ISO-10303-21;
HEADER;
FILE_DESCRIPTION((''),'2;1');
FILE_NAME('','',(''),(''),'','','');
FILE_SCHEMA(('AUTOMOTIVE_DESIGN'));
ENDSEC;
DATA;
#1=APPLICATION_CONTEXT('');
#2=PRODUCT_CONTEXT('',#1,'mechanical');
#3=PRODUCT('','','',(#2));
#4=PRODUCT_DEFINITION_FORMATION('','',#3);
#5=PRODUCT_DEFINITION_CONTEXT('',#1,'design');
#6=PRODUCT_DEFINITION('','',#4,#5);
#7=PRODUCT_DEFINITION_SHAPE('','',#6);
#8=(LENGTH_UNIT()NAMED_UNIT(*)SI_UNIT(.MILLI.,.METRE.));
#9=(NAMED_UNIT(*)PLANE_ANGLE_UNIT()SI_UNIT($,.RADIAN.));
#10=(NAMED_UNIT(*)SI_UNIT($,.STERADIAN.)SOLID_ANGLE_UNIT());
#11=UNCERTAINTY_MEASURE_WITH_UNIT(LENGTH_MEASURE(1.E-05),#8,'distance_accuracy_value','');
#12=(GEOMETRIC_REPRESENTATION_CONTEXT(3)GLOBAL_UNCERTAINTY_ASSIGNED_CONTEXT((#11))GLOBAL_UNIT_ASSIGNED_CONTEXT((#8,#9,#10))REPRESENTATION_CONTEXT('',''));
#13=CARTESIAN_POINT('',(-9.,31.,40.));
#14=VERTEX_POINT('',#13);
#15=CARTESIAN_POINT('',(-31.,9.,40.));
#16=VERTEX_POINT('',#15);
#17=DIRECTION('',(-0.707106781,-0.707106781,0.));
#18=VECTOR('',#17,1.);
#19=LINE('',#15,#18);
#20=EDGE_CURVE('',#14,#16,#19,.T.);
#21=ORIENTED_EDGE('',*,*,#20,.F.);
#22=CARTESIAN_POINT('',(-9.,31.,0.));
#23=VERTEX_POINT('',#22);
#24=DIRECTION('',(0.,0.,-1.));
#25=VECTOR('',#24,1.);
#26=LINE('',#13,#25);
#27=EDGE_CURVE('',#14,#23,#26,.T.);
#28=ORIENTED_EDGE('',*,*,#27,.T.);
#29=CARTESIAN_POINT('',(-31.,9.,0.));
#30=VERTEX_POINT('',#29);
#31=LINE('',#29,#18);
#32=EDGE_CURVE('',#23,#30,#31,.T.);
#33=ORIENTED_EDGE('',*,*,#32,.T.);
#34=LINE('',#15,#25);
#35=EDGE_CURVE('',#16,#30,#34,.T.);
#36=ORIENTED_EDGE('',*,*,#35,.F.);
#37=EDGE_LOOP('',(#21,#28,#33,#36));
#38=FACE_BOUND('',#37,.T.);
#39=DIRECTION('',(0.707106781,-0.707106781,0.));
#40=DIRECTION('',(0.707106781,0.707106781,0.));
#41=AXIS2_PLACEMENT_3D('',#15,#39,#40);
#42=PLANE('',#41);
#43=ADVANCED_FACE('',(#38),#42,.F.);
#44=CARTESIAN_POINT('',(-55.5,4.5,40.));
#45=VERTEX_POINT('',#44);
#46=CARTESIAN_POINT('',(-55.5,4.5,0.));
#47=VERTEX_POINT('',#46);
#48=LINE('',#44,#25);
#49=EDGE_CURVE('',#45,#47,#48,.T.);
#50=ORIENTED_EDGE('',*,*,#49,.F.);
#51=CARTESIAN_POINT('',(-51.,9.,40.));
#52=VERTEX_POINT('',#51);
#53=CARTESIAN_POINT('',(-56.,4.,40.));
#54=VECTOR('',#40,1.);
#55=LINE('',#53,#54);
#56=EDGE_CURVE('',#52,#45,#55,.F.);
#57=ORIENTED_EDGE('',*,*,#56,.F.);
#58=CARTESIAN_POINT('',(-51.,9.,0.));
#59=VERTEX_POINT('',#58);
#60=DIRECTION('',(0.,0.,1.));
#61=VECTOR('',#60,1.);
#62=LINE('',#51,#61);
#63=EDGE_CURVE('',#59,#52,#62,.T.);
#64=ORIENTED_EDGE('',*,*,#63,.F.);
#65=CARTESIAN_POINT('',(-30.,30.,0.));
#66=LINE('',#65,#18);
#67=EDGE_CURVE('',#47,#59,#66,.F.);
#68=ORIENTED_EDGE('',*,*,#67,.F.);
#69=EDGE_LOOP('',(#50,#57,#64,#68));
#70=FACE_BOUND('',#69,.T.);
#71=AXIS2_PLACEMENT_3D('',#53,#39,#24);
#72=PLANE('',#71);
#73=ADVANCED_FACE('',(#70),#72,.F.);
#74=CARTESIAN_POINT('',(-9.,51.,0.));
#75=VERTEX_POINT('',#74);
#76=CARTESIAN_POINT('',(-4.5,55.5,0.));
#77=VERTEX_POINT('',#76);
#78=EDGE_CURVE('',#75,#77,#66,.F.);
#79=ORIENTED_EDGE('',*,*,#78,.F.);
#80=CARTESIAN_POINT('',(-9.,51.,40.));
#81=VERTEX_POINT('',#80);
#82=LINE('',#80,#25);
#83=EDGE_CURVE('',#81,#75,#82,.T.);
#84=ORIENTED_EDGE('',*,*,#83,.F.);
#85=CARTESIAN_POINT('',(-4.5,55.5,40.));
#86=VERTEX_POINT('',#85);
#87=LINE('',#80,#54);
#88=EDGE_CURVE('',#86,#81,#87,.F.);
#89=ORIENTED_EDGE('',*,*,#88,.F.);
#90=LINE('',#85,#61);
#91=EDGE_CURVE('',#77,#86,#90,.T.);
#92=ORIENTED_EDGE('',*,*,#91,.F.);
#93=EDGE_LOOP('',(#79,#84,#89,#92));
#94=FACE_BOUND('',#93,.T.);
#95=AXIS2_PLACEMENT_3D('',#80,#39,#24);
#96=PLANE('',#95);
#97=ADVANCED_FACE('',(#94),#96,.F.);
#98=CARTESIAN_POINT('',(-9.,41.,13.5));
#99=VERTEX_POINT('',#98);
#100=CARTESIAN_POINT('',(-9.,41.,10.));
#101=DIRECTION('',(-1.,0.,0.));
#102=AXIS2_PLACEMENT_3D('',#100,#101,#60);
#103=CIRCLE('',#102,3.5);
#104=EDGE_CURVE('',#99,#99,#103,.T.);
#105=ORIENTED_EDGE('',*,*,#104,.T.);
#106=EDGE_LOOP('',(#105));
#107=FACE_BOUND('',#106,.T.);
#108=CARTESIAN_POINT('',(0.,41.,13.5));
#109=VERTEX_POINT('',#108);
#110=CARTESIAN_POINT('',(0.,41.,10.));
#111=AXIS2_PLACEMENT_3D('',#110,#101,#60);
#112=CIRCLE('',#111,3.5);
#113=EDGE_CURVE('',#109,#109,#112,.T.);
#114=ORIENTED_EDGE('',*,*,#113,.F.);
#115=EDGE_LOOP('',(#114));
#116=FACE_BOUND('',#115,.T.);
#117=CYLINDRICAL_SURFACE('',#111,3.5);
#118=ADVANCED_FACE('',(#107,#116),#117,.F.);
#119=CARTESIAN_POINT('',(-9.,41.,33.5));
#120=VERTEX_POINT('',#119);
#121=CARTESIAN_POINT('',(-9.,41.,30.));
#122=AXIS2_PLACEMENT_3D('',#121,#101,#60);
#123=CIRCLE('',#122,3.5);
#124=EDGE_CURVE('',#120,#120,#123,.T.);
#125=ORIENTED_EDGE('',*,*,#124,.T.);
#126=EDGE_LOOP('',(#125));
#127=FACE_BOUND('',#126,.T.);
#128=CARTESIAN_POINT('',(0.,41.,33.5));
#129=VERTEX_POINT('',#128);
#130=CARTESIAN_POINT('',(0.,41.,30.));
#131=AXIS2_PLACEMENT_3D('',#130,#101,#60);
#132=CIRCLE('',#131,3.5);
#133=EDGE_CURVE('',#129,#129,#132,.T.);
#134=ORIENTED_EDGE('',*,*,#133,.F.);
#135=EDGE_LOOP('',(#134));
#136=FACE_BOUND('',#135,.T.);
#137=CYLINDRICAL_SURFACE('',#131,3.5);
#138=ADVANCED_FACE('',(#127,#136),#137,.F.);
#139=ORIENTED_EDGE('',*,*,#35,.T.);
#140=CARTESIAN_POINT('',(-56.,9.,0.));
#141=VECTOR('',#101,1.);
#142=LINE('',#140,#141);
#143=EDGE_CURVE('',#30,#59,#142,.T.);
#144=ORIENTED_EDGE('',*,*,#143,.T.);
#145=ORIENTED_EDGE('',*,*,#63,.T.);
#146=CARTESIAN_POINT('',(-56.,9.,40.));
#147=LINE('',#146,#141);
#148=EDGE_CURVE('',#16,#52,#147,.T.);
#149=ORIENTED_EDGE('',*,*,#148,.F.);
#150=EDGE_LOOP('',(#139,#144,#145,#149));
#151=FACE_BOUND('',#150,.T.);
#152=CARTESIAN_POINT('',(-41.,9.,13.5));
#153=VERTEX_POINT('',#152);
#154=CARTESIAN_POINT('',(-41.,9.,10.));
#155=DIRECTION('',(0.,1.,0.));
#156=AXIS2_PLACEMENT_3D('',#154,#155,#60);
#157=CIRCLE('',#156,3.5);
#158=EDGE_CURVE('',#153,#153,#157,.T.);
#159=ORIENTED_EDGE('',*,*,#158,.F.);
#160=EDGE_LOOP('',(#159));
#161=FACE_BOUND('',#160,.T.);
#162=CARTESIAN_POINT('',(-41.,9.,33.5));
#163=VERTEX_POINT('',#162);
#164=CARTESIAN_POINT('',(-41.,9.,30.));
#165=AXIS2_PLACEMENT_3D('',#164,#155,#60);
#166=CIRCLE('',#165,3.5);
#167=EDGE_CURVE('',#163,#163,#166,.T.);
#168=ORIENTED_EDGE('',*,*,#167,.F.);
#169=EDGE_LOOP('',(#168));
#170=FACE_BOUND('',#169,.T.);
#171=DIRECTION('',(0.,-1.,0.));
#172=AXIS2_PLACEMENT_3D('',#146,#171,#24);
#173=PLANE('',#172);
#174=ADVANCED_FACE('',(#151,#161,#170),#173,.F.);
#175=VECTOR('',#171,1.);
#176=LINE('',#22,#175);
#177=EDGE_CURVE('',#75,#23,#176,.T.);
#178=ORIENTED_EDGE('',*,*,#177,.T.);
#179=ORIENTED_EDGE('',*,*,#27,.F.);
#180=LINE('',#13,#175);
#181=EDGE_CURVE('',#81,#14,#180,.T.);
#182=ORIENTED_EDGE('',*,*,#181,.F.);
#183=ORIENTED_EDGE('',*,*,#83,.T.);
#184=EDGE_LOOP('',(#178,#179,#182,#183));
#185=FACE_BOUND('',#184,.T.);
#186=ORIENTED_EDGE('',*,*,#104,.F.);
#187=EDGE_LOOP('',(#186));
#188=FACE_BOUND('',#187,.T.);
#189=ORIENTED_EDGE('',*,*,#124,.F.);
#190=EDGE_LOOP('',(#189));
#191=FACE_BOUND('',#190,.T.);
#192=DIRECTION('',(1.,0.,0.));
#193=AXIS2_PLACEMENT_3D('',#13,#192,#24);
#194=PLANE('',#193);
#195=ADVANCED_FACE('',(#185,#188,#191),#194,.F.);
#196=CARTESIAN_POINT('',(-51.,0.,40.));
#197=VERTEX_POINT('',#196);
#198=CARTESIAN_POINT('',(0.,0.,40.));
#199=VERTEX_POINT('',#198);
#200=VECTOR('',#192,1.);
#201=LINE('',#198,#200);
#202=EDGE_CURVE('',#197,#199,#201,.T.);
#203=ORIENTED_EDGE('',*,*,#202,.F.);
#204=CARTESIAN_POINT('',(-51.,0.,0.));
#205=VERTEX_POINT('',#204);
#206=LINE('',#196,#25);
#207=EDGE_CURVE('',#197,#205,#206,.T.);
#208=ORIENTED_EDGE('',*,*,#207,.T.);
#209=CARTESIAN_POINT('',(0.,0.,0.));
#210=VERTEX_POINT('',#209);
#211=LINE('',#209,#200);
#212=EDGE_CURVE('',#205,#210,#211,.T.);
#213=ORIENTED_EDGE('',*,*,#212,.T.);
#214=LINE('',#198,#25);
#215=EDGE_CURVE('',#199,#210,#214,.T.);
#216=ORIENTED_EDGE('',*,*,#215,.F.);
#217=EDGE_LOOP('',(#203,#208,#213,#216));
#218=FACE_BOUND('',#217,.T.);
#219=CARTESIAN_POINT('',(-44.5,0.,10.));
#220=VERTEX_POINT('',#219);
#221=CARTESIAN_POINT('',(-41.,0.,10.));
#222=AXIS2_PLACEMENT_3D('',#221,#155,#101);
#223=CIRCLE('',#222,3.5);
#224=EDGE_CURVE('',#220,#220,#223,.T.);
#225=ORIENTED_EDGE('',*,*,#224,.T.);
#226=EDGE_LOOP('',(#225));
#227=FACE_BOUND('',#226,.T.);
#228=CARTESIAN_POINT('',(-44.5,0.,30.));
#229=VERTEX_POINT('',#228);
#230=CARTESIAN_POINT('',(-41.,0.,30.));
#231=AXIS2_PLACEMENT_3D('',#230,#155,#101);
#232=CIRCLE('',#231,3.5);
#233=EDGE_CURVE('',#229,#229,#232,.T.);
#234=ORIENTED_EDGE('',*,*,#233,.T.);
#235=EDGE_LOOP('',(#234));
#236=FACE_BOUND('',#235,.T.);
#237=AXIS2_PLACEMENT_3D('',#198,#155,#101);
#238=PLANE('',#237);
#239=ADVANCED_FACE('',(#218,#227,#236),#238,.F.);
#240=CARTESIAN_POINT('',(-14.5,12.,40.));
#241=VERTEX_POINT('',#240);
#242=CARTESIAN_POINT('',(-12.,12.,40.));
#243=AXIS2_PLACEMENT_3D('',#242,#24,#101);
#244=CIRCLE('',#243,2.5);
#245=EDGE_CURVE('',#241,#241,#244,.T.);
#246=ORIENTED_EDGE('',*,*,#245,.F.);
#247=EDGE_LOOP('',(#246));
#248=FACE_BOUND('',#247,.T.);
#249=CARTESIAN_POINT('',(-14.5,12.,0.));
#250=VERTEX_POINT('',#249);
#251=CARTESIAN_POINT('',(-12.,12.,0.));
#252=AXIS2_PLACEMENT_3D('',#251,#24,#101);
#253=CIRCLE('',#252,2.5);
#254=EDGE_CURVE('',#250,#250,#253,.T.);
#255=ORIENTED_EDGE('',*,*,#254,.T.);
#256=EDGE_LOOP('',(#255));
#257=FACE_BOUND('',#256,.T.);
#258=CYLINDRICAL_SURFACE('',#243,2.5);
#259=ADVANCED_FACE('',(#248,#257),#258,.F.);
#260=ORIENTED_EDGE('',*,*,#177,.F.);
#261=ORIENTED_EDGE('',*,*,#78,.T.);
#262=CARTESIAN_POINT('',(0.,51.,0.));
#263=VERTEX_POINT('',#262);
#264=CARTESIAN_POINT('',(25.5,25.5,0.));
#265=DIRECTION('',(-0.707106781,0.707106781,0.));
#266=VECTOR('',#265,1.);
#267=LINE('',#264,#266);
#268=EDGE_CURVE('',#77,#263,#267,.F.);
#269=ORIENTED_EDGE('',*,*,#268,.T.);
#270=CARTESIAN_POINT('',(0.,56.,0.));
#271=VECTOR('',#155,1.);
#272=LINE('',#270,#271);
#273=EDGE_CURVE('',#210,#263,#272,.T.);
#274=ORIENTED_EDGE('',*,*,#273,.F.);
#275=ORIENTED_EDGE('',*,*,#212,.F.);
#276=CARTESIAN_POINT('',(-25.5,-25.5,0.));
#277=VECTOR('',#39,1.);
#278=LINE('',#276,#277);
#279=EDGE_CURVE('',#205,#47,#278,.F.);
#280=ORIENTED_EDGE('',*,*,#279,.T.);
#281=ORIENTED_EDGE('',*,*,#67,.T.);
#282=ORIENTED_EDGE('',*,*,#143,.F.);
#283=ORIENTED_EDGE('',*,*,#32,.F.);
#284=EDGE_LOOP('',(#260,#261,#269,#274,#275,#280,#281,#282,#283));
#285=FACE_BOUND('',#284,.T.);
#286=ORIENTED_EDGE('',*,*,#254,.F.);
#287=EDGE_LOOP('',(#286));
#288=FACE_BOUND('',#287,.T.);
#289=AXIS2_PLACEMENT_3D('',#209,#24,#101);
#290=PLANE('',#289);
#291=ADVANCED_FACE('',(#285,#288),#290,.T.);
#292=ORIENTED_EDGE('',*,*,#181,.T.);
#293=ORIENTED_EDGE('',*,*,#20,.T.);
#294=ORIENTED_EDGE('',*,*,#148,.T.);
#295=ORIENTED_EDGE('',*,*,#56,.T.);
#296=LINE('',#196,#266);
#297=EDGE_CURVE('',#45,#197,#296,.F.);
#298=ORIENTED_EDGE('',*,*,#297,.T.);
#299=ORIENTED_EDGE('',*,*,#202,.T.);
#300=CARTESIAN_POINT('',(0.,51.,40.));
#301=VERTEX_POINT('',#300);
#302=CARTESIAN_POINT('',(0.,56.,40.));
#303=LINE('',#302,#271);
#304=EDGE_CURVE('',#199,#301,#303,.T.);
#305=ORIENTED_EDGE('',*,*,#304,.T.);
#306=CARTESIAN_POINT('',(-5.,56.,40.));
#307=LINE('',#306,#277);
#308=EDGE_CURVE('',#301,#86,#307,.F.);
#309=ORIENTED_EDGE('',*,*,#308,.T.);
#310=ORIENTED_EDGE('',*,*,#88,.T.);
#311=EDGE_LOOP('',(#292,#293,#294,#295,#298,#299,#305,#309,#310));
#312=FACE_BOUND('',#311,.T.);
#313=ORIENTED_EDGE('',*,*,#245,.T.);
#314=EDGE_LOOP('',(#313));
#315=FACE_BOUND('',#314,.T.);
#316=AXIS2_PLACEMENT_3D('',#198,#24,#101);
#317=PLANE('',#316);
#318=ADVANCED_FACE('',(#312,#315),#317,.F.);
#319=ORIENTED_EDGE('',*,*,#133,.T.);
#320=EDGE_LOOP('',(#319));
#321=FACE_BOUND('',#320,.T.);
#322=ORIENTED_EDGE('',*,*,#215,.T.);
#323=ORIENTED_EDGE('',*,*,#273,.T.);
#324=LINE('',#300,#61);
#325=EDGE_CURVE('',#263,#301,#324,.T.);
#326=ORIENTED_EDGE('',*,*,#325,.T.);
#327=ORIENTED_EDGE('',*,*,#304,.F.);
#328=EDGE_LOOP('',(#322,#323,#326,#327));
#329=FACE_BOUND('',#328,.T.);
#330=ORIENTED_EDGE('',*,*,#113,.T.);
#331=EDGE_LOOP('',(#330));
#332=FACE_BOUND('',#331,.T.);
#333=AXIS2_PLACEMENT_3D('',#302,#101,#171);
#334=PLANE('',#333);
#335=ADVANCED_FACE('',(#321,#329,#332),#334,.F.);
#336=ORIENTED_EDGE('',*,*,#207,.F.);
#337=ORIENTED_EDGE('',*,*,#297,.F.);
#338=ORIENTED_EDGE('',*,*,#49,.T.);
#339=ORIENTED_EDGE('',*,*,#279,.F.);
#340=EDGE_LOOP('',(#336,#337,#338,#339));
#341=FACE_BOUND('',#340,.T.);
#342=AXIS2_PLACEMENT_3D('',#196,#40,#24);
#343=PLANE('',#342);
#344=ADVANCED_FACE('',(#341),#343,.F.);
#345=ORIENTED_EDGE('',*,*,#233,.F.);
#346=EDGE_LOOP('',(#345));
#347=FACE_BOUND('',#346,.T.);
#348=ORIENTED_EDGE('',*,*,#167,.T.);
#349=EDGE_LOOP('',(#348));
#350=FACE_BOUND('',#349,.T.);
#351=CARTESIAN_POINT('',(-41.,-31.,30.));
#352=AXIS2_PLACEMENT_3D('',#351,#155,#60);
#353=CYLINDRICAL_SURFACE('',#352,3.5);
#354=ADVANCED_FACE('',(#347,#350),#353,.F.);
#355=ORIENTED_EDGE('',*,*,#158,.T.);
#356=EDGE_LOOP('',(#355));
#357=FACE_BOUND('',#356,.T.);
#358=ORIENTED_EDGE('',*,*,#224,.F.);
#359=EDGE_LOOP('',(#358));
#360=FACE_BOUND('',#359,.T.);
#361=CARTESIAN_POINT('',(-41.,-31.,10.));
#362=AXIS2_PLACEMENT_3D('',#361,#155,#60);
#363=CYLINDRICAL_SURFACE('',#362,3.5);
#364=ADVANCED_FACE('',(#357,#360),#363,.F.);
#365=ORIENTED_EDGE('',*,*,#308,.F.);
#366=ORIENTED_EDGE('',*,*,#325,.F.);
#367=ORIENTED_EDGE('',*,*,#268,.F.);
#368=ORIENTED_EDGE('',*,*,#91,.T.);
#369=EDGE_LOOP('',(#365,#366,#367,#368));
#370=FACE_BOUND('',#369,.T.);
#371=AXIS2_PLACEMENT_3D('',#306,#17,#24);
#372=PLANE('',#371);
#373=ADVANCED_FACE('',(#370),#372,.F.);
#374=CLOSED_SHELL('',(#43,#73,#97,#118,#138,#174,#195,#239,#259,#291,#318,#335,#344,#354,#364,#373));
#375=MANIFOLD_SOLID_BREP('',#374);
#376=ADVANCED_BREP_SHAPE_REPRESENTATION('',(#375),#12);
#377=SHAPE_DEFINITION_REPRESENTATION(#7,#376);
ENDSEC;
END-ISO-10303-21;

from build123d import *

# Parameters (mm, degrees)
BOSS_EXTRUDE1_DEPTH = 40
SKETCH2_R           = 3.5
CUT_EXTRUDE1_DEPTH  = 84.3366666
SKETCH3_R           = 3.5
CUT_EXTRUDE2_DEPTH  = 40
CHAMFER1_SIZE       = 5
SKETCH4_R           = 2.5
CUT_EXTRUDE3_DEPTH  = 40


with BuildPart() as part:
    # Sketch1 → Boss-Extrude1 (new body)
    with BuildSketch(Plane.XY):
        Polygon((0, 56), (0, 0), (-56, 0), (-56, 9), (-31, 9), (-9, 31), (-9, 56), align=None)
    extrude(amount=BOSS_EXTRUDE1_DEPTH)

    # Sketch2 → Cut-Extrude1 (cut, through all)
    with BuildSketch(Plane.ZY.offset(9)):
        with Locations((10, 41)):
            Circle(SKETCH2_R)
        with Locations((30, 41)):
            Circle(SKETCH2_R)
    extrude(amount=-CUT_EXTRUDE1_DEPTH, mode=Mode.SUBTRACT)

    # Sketch3 → Cut-Extrude2 (cut)
    with BuildSketch(Plane(origin=(0, 9, 0), x_dir=(1, 0, 0), z_dir=(0, 1, 0))):
        with Locations(Location((-41, -10, 0), (0, 0, 270))):
            Circle(SKETCH3_R)
        with Locations(Location((-41, -30, 0), (0, 0, 270))):
            Circle(SKETCH3_R)
    extrude(amount=-CUT_EXTRUDE2_DEPTH, mode=Mode.SUBTRACT)

    # Chamfer1
    # the kernel refuses this chamfer: 5 mm, written as the material it takes off along each edge
    with BuildSketch(Plane(origin=(-56, 0, -12.85841494), x_dir=(0.9996219169112968, -0.027495876610586254, 0), z_dir=(0, 0, 1)), Plane(origin=(-56, 9, -12.85841494), x_dir=(-0.027495876610586317, -0.9996219169112968, 0), z_dir=(0, 0, 1))) as chamfer1_piece_1:
        Polygon((CHAMFER1_SIZE * 0.999621916911, CHAMFER1_SIZE * 0.0274958766106), (-CHAMFER1_SIZE * 0.0274958766106, CHAMFER1_SIZE * 0.999621916911), (0, 0), align=None)
    extrude(amount=65.71682988, mode=Mode.SUBTRACT)
    with BuildSketch(Plane(origin=(0, 56, -12.85841494), x_dir=(0.02749587661058641, -0.9996219169112968, 0), z_dir=(0, 0, 1)), Plane(origin=(-9, 56, -12.85841494), x_dir=(0.9996219169112968, 0.027495876610586317, 0), z_dir=(0, 0, 1))) as chamfer1_piece_2:
        Polygon((CHAMFER1_SIZE * 0.999621916911, -CHAMFER1_SIZE * 0.0274958766106), (-CHAMFER1_SIZE * 0.0274958766106, -CHAMFER1_SIZE * 0.999621916911), (0, 0), align=None)
    extrude(amount=65.71682988, mode=Mode.SUBTRACT)

    # Sketch4 → Cut-Extrude3 (cut)
    with BuildSketch(Plane(origin=(0, 0, 0), x_dir=(-1, 0, 0), z_dir=(0, 0, -1))):
        with Locations((12, 12)):
            Circle(SKETCH4_R)
    extrude(amount=-CUT_EXTRUDE3_DEPTH, mode=Mode.SUBTRACT)


solid = part.part
